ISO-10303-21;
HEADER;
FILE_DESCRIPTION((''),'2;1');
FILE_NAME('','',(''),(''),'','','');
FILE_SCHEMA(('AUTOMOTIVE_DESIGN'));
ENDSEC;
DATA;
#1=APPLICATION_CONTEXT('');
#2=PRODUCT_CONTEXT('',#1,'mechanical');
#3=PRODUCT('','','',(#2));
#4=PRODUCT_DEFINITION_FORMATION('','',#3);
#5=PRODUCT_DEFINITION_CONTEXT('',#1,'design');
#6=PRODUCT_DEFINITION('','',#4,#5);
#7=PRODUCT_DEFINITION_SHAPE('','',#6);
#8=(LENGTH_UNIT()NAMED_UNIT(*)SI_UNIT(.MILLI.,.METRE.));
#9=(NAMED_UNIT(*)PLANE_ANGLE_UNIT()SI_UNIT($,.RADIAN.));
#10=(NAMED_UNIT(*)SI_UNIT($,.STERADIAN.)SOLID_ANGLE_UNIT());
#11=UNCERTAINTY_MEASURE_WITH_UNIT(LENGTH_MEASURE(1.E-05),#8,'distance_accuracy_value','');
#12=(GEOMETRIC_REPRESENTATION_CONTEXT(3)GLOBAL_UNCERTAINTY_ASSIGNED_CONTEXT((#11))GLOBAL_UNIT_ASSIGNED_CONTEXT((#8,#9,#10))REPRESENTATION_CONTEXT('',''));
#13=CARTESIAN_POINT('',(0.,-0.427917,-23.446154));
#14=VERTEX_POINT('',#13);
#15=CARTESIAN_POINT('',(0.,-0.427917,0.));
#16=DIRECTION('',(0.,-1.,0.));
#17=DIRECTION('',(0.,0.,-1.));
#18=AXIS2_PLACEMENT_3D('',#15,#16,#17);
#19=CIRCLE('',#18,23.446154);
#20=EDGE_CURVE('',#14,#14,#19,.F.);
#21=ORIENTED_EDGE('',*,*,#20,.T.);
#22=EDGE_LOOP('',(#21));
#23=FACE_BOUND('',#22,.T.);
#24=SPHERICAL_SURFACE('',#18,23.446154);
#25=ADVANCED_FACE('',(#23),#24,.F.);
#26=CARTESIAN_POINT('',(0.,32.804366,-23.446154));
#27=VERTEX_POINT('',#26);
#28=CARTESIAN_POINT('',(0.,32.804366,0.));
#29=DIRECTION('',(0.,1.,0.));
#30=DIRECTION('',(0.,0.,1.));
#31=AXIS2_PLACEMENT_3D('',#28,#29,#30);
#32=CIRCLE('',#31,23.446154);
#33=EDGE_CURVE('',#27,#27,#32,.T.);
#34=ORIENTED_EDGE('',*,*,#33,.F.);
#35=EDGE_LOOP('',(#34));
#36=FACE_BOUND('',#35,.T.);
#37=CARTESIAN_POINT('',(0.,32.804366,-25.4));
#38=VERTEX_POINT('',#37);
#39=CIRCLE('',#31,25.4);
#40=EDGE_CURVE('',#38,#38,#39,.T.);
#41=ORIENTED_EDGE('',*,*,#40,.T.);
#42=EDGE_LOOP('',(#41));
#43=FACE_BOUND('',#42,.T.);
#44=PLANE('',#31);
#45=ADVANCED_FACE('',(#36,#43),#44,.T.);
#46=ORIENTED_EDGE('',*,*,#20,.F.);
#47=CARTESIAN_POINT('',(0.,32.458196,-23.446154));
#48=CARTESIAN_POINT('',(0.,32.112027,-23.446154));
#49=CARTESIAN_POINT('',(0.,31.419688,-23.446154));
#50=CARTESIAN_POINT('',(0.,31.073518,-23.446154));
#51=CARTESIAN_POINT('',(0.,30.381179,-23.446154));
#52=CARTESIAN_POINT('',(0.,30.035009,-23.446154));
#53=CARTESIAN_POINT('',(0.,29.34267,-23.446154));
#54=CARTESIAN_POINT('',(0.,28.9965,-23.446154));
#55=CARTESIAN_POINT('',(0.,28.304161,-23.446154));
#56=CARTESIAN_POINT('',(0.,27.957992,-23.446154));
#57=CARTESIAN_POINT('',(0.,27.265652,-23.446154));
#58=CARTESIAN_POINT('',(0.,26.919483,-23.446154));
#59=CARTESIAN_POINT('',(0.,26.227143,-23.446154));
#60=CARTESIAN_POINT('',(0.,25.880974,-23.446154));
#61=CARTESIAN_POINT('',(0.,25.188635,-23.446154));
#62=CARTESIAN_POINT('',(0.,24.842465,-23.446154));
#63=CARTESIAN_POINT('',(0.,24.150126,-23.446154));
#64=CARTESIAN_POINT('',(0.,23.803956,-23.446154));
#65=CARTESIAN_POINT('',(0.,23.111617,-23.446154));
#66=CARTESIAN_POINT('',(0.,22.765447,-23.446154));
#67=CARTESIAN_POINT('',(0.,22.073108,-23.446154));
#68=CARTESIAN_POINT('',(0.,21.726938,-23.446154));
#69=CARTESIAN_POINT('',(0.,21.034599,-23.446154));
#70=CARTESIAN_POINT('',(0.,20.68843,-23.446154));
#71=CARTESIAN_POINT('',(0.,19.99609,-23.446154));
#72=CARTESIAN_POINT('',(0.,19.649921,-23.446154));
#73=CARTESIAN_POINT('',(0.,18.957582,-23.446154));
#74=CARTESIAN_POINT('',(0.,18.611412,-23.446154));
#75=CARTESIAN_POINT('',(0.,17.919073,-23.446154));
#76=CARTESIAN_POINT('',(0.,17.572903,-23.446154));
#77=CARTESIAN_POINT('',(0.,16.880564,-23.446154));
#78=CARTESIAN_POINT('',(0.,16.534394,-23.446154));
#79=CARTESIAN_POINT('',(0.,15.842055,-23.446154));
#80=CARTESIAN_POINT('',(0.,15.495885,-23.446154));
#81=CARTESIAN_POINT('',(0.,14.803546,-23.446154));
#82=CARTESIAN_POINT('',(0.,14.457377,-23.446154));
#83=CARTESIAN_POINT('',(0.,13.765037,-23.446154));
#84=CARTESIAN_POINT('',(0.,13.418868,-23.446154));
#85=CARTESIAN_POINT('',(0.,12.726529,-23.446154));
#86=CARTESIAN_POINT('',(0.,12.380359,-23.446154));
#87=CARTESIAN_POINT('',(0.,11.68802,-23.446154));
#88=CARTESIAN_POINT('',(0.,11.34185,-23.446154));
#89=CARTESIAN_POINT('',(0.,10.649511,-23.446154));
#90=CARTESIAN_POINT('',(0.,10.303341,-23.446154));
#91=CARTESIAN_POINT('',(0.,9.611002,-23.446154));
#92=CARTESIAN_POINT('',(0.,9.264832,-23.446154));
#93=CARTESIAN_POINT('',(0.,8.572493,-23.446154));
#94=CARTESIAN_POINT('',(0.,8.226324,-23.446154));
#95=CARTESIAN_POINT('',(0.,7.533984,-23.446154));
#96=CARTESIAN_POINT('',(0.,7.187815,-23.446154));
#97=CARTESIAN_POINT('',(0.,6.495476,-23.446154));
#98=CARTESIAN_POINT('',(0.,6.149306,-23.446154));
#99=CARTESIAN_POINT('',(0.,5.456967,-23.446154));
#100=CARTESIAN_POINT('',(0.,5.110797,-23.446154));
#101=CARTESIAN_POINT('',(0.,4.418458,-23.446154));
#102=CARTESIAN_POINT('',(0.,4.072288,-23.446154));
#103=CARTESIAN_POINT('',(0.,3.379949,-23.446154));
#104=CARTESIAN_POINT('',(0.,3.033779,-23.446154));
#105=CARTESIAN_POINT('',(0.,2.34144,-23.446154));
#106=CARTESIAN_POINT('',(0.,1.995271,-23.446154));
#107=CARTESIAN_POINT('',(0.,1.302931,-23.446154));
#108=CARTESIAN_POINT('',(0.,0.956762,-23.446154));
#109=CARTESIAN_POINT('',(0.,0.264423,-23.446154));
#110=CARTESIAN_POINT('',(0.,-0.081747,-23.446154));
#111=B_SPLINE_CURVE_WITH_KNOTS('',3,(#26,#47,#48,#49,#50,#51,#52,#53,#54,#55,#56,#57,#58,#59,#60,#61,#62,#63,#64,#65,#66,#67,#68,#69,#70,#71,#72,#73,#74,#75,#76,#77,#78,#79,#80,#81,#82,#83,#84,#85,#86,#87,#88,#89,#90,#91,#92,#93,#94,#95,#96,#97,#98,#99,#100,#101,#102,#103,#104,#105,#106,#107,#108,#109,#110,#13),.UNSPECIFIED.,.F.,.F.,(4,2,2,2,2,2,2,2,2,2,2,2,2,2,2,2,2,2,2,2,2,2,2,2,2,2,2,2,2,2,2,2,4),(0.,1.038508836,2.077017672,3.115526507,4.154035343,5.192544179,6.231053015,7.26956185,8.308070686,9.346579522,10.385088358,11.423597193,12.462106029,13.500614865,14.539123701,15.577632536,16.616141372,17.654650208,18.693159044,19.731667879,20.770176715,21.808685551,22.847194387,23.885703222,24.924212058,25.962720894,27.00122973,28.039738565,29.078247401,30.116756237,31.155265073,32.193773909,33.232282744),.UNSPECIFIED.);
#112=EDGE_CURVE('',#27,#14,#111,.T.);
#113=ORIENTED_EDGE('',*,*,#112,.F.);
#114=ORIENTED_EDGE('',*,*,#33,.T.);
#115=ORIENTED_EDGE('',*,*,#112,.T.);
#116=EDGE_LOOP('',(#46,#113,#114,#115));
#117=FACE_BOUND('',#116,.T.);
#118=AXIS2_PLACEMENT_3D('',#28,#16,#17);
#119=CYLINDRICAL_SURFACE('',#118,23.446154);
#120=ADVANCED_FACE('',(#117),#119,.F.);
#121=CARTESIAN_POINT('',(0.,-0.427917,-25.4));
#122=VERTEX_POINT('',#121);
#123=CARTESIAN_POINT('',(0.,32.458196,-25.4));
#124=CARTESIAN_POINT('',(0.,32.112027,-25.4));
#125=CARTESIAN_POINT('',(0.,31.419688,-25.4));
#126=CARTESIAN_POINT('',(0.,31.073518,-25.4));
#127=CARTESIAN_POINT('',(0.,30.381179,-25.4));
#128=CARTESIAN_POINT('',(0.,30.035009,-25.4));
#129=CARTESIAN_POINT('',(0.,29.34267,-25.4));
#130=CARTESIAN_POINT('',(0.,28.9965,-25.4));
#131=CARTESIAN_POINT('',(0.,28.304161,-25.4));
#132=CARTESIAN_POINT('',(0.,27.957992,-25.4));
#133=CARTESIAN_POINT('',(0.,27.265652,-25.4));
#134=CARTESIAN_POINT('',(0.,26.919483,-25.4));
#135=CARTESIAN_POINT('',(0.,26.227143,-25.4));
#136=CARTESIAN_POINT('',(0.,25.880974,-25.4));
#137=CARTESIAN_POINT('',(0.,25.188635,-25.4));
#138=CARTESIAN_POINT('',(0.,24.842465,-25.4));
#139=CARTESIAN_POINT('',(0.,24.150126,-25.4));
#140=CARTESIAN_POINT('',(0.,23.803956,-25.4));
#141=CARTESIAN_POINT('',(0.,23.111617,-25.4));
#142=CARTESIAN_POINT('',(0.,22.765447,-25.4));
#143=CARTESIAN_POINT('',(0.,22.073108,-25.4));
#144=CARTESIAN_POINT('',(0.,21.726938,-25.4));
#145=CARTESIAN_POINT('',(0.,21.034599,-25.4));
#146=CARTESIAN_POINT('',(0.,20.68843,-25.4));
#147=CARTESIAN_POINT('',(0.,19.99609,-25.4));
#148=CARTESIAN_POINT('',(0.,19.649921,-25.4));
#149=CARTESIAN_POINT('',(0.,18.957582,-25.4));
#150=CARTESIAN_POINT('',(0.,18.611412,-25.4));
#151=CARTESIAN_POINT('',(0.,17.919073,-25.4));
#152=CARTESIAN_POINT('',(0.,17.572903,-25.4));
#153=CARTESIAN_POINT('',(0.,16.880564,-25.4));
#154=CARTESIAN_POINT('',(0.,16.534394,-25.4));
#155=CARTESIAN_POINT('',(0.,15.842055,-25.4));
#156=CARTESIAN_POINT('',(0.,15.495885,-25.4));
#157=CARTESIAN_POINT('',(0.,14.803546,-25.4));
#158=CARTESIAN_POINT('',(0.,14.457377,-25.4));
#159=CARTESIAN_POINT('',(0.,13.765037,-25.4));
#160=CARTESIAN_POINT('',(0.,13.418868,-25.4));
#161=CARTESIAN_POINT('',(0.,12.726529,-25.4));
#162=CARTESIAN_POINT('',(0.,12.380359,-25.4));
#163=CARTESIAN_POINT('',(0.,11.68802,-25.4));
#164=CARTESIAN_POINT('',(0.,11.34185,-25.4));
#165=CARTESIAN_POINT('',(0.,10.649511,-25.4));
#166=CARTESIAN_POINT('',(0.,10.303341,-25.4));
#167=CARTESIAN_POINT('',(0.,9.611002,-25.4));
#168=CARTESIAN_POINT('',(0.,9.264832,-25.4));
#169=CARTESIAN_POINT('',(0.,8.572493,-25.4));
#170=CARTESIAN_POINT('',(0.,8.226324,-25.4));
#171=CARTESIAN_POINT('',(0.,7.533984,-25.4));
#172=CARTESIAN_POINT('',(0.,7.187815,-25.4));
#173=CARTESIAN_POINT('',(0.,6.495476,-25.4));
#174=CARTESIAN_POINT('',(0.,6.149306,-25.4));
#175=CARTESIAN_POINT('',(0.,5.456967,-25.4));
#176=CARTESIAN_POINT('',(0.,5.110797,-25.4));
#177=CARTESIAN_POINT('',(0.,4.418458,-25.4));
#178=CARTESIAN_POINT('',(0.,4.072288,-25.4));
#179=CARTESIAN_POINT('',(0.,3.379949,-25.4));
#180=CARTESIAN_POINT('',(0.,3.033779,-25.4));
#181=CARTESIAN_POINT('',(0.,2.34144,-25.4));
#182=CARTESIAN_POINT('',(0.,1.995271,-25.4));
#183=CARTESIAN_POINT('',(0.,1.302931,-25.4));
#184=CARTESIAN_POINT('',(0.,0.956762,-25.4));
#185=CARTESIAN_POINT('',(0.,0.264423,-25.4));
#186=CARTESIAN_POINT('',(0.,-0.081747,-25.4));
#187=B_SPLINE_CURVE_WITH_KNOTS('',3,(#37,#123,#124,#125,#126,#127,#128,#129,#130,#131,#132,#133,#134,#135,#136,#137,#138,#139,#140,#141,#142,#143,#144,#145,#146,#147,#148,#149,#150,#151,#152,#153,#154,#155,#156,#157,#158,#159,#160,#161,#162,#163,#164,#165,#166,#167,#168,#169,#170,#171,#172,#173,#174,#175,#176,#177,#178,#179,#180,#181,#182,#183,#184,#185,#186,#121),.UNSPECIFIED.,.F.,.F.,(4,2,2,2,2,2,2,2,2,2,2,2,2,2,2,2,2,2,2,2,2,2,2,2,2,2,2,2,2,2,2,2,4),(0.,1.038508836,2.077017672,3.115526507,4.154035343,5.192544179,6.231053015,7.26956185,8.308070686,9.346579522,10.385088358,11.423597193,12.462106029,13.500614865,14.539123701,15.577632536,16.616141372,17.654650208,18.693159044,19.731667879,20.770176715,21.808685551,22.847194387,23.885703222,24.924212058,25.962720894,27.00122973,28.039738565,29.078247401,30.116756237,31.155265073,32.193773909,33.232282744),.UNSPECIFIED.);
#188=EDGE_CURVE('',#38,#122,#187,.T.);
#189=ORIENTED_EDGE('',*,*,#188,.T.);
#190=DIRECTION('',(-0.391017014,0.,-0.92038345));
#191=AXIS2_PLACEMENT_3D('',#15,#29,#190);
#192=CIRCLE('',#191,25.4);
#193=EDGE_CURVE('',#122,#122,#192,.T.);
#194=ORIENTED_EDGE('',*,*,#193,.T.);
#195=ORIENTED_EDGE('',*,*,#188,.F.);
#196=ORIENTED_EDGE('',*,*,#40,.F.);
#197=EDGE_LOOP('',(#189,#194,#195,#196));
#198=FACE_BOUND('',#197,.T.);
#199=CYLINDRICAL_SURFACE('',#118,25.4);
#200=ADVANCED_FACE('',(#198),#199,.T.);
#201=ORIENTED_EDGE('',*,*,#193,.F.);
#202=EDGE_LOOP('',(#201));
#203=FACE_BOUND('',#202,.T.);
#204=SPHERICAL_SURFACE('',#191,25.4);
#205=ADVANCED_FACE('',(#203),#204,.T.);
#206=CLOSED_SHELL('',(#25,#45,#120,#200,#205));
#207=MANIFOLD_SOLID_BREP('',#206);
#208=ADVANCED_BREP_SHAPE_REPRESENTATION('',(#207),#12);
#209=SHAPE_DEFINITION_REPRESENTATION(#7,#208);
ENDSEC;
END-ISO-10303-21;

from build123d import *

# Parameters (mm, degrees)
SKETCH1_R           = 38.1
BOSS_EXTRUDE1_DEPTH = 50.827459459
SHELL2_T            = 3.175
REVOLVE1_ANGLE      = 180
SCALE1_SCALE        = 0.615384615


# Read off the part's stored shape, not the designer's step: Shell4
with BuildPart() as part:
    # Sketch1 → Boss-Extrude1 (new body)
    with BuildSketch(Plane(origin=(0, 0, 0), x_dir=(1, 0, 0), z_dir=(0, 1, 0))):
        with Locations(Location((0, 0, 0), (0, 0, 90))):
            Circle(SKETCH1_R)
    extrude(amount=BOSS_EXTRUDE1_DEPTH)

    # Shell2
    shell2_openings = [part.faces().sort_by_distance(p)[0] for p in [
        (0, 50.827459459, 0),
    ]]
    offset(amount=SHELL2_T, openings=shell2_openings, kind=Kind.INTERSECTION)

    # Sketch5 → Revolve1 (revolve)
    with BuildSketch(Plane.XZ.offset(3.175)):
        with BuildLine():
            Line((-40.445113765, 8.235192624), (40.445113765, -8.235192624))
            ThreePointArc((40.445113765, -8.235192624), (-8.235192624, -40.445113765), (-40.445113765, 8.235192624))
        make_face()
    revolve(axis=Axis((-40.445113765, -3.175, 8.235192624), (-0.979893731431563, 0, 0.19952011202164077)), revolution_arc=REVOLVE1_ANGLE)

    # Shell4 outline → Shell4 (revolve, cut)
    with BuildSketch(Plane.XY):
        with BuildLine():
            ThreePointArc((0, -41.275), (26.940768377, -30.11576835), (38.1, -3.174999962))
            Line((38.1, -3.174999962), (38.1, 0))
            Line((38.1, 0), (0, 0))
            Line((0, 0), (0, -41.275))
        make_face()
    revolve(axis=Axis((0, 0, 0), (0, 1, 0)), mode=Mode.SUBTRACT)


with BuildPart() as part_1:
    # Scale1: scaled about (-2e-09, 3.96741665, 0)
    add(part.part.scale(SCALE1_SCALE).moved(Location((-1e-09, 1.525929481, 0))))


solid = part_1.part
